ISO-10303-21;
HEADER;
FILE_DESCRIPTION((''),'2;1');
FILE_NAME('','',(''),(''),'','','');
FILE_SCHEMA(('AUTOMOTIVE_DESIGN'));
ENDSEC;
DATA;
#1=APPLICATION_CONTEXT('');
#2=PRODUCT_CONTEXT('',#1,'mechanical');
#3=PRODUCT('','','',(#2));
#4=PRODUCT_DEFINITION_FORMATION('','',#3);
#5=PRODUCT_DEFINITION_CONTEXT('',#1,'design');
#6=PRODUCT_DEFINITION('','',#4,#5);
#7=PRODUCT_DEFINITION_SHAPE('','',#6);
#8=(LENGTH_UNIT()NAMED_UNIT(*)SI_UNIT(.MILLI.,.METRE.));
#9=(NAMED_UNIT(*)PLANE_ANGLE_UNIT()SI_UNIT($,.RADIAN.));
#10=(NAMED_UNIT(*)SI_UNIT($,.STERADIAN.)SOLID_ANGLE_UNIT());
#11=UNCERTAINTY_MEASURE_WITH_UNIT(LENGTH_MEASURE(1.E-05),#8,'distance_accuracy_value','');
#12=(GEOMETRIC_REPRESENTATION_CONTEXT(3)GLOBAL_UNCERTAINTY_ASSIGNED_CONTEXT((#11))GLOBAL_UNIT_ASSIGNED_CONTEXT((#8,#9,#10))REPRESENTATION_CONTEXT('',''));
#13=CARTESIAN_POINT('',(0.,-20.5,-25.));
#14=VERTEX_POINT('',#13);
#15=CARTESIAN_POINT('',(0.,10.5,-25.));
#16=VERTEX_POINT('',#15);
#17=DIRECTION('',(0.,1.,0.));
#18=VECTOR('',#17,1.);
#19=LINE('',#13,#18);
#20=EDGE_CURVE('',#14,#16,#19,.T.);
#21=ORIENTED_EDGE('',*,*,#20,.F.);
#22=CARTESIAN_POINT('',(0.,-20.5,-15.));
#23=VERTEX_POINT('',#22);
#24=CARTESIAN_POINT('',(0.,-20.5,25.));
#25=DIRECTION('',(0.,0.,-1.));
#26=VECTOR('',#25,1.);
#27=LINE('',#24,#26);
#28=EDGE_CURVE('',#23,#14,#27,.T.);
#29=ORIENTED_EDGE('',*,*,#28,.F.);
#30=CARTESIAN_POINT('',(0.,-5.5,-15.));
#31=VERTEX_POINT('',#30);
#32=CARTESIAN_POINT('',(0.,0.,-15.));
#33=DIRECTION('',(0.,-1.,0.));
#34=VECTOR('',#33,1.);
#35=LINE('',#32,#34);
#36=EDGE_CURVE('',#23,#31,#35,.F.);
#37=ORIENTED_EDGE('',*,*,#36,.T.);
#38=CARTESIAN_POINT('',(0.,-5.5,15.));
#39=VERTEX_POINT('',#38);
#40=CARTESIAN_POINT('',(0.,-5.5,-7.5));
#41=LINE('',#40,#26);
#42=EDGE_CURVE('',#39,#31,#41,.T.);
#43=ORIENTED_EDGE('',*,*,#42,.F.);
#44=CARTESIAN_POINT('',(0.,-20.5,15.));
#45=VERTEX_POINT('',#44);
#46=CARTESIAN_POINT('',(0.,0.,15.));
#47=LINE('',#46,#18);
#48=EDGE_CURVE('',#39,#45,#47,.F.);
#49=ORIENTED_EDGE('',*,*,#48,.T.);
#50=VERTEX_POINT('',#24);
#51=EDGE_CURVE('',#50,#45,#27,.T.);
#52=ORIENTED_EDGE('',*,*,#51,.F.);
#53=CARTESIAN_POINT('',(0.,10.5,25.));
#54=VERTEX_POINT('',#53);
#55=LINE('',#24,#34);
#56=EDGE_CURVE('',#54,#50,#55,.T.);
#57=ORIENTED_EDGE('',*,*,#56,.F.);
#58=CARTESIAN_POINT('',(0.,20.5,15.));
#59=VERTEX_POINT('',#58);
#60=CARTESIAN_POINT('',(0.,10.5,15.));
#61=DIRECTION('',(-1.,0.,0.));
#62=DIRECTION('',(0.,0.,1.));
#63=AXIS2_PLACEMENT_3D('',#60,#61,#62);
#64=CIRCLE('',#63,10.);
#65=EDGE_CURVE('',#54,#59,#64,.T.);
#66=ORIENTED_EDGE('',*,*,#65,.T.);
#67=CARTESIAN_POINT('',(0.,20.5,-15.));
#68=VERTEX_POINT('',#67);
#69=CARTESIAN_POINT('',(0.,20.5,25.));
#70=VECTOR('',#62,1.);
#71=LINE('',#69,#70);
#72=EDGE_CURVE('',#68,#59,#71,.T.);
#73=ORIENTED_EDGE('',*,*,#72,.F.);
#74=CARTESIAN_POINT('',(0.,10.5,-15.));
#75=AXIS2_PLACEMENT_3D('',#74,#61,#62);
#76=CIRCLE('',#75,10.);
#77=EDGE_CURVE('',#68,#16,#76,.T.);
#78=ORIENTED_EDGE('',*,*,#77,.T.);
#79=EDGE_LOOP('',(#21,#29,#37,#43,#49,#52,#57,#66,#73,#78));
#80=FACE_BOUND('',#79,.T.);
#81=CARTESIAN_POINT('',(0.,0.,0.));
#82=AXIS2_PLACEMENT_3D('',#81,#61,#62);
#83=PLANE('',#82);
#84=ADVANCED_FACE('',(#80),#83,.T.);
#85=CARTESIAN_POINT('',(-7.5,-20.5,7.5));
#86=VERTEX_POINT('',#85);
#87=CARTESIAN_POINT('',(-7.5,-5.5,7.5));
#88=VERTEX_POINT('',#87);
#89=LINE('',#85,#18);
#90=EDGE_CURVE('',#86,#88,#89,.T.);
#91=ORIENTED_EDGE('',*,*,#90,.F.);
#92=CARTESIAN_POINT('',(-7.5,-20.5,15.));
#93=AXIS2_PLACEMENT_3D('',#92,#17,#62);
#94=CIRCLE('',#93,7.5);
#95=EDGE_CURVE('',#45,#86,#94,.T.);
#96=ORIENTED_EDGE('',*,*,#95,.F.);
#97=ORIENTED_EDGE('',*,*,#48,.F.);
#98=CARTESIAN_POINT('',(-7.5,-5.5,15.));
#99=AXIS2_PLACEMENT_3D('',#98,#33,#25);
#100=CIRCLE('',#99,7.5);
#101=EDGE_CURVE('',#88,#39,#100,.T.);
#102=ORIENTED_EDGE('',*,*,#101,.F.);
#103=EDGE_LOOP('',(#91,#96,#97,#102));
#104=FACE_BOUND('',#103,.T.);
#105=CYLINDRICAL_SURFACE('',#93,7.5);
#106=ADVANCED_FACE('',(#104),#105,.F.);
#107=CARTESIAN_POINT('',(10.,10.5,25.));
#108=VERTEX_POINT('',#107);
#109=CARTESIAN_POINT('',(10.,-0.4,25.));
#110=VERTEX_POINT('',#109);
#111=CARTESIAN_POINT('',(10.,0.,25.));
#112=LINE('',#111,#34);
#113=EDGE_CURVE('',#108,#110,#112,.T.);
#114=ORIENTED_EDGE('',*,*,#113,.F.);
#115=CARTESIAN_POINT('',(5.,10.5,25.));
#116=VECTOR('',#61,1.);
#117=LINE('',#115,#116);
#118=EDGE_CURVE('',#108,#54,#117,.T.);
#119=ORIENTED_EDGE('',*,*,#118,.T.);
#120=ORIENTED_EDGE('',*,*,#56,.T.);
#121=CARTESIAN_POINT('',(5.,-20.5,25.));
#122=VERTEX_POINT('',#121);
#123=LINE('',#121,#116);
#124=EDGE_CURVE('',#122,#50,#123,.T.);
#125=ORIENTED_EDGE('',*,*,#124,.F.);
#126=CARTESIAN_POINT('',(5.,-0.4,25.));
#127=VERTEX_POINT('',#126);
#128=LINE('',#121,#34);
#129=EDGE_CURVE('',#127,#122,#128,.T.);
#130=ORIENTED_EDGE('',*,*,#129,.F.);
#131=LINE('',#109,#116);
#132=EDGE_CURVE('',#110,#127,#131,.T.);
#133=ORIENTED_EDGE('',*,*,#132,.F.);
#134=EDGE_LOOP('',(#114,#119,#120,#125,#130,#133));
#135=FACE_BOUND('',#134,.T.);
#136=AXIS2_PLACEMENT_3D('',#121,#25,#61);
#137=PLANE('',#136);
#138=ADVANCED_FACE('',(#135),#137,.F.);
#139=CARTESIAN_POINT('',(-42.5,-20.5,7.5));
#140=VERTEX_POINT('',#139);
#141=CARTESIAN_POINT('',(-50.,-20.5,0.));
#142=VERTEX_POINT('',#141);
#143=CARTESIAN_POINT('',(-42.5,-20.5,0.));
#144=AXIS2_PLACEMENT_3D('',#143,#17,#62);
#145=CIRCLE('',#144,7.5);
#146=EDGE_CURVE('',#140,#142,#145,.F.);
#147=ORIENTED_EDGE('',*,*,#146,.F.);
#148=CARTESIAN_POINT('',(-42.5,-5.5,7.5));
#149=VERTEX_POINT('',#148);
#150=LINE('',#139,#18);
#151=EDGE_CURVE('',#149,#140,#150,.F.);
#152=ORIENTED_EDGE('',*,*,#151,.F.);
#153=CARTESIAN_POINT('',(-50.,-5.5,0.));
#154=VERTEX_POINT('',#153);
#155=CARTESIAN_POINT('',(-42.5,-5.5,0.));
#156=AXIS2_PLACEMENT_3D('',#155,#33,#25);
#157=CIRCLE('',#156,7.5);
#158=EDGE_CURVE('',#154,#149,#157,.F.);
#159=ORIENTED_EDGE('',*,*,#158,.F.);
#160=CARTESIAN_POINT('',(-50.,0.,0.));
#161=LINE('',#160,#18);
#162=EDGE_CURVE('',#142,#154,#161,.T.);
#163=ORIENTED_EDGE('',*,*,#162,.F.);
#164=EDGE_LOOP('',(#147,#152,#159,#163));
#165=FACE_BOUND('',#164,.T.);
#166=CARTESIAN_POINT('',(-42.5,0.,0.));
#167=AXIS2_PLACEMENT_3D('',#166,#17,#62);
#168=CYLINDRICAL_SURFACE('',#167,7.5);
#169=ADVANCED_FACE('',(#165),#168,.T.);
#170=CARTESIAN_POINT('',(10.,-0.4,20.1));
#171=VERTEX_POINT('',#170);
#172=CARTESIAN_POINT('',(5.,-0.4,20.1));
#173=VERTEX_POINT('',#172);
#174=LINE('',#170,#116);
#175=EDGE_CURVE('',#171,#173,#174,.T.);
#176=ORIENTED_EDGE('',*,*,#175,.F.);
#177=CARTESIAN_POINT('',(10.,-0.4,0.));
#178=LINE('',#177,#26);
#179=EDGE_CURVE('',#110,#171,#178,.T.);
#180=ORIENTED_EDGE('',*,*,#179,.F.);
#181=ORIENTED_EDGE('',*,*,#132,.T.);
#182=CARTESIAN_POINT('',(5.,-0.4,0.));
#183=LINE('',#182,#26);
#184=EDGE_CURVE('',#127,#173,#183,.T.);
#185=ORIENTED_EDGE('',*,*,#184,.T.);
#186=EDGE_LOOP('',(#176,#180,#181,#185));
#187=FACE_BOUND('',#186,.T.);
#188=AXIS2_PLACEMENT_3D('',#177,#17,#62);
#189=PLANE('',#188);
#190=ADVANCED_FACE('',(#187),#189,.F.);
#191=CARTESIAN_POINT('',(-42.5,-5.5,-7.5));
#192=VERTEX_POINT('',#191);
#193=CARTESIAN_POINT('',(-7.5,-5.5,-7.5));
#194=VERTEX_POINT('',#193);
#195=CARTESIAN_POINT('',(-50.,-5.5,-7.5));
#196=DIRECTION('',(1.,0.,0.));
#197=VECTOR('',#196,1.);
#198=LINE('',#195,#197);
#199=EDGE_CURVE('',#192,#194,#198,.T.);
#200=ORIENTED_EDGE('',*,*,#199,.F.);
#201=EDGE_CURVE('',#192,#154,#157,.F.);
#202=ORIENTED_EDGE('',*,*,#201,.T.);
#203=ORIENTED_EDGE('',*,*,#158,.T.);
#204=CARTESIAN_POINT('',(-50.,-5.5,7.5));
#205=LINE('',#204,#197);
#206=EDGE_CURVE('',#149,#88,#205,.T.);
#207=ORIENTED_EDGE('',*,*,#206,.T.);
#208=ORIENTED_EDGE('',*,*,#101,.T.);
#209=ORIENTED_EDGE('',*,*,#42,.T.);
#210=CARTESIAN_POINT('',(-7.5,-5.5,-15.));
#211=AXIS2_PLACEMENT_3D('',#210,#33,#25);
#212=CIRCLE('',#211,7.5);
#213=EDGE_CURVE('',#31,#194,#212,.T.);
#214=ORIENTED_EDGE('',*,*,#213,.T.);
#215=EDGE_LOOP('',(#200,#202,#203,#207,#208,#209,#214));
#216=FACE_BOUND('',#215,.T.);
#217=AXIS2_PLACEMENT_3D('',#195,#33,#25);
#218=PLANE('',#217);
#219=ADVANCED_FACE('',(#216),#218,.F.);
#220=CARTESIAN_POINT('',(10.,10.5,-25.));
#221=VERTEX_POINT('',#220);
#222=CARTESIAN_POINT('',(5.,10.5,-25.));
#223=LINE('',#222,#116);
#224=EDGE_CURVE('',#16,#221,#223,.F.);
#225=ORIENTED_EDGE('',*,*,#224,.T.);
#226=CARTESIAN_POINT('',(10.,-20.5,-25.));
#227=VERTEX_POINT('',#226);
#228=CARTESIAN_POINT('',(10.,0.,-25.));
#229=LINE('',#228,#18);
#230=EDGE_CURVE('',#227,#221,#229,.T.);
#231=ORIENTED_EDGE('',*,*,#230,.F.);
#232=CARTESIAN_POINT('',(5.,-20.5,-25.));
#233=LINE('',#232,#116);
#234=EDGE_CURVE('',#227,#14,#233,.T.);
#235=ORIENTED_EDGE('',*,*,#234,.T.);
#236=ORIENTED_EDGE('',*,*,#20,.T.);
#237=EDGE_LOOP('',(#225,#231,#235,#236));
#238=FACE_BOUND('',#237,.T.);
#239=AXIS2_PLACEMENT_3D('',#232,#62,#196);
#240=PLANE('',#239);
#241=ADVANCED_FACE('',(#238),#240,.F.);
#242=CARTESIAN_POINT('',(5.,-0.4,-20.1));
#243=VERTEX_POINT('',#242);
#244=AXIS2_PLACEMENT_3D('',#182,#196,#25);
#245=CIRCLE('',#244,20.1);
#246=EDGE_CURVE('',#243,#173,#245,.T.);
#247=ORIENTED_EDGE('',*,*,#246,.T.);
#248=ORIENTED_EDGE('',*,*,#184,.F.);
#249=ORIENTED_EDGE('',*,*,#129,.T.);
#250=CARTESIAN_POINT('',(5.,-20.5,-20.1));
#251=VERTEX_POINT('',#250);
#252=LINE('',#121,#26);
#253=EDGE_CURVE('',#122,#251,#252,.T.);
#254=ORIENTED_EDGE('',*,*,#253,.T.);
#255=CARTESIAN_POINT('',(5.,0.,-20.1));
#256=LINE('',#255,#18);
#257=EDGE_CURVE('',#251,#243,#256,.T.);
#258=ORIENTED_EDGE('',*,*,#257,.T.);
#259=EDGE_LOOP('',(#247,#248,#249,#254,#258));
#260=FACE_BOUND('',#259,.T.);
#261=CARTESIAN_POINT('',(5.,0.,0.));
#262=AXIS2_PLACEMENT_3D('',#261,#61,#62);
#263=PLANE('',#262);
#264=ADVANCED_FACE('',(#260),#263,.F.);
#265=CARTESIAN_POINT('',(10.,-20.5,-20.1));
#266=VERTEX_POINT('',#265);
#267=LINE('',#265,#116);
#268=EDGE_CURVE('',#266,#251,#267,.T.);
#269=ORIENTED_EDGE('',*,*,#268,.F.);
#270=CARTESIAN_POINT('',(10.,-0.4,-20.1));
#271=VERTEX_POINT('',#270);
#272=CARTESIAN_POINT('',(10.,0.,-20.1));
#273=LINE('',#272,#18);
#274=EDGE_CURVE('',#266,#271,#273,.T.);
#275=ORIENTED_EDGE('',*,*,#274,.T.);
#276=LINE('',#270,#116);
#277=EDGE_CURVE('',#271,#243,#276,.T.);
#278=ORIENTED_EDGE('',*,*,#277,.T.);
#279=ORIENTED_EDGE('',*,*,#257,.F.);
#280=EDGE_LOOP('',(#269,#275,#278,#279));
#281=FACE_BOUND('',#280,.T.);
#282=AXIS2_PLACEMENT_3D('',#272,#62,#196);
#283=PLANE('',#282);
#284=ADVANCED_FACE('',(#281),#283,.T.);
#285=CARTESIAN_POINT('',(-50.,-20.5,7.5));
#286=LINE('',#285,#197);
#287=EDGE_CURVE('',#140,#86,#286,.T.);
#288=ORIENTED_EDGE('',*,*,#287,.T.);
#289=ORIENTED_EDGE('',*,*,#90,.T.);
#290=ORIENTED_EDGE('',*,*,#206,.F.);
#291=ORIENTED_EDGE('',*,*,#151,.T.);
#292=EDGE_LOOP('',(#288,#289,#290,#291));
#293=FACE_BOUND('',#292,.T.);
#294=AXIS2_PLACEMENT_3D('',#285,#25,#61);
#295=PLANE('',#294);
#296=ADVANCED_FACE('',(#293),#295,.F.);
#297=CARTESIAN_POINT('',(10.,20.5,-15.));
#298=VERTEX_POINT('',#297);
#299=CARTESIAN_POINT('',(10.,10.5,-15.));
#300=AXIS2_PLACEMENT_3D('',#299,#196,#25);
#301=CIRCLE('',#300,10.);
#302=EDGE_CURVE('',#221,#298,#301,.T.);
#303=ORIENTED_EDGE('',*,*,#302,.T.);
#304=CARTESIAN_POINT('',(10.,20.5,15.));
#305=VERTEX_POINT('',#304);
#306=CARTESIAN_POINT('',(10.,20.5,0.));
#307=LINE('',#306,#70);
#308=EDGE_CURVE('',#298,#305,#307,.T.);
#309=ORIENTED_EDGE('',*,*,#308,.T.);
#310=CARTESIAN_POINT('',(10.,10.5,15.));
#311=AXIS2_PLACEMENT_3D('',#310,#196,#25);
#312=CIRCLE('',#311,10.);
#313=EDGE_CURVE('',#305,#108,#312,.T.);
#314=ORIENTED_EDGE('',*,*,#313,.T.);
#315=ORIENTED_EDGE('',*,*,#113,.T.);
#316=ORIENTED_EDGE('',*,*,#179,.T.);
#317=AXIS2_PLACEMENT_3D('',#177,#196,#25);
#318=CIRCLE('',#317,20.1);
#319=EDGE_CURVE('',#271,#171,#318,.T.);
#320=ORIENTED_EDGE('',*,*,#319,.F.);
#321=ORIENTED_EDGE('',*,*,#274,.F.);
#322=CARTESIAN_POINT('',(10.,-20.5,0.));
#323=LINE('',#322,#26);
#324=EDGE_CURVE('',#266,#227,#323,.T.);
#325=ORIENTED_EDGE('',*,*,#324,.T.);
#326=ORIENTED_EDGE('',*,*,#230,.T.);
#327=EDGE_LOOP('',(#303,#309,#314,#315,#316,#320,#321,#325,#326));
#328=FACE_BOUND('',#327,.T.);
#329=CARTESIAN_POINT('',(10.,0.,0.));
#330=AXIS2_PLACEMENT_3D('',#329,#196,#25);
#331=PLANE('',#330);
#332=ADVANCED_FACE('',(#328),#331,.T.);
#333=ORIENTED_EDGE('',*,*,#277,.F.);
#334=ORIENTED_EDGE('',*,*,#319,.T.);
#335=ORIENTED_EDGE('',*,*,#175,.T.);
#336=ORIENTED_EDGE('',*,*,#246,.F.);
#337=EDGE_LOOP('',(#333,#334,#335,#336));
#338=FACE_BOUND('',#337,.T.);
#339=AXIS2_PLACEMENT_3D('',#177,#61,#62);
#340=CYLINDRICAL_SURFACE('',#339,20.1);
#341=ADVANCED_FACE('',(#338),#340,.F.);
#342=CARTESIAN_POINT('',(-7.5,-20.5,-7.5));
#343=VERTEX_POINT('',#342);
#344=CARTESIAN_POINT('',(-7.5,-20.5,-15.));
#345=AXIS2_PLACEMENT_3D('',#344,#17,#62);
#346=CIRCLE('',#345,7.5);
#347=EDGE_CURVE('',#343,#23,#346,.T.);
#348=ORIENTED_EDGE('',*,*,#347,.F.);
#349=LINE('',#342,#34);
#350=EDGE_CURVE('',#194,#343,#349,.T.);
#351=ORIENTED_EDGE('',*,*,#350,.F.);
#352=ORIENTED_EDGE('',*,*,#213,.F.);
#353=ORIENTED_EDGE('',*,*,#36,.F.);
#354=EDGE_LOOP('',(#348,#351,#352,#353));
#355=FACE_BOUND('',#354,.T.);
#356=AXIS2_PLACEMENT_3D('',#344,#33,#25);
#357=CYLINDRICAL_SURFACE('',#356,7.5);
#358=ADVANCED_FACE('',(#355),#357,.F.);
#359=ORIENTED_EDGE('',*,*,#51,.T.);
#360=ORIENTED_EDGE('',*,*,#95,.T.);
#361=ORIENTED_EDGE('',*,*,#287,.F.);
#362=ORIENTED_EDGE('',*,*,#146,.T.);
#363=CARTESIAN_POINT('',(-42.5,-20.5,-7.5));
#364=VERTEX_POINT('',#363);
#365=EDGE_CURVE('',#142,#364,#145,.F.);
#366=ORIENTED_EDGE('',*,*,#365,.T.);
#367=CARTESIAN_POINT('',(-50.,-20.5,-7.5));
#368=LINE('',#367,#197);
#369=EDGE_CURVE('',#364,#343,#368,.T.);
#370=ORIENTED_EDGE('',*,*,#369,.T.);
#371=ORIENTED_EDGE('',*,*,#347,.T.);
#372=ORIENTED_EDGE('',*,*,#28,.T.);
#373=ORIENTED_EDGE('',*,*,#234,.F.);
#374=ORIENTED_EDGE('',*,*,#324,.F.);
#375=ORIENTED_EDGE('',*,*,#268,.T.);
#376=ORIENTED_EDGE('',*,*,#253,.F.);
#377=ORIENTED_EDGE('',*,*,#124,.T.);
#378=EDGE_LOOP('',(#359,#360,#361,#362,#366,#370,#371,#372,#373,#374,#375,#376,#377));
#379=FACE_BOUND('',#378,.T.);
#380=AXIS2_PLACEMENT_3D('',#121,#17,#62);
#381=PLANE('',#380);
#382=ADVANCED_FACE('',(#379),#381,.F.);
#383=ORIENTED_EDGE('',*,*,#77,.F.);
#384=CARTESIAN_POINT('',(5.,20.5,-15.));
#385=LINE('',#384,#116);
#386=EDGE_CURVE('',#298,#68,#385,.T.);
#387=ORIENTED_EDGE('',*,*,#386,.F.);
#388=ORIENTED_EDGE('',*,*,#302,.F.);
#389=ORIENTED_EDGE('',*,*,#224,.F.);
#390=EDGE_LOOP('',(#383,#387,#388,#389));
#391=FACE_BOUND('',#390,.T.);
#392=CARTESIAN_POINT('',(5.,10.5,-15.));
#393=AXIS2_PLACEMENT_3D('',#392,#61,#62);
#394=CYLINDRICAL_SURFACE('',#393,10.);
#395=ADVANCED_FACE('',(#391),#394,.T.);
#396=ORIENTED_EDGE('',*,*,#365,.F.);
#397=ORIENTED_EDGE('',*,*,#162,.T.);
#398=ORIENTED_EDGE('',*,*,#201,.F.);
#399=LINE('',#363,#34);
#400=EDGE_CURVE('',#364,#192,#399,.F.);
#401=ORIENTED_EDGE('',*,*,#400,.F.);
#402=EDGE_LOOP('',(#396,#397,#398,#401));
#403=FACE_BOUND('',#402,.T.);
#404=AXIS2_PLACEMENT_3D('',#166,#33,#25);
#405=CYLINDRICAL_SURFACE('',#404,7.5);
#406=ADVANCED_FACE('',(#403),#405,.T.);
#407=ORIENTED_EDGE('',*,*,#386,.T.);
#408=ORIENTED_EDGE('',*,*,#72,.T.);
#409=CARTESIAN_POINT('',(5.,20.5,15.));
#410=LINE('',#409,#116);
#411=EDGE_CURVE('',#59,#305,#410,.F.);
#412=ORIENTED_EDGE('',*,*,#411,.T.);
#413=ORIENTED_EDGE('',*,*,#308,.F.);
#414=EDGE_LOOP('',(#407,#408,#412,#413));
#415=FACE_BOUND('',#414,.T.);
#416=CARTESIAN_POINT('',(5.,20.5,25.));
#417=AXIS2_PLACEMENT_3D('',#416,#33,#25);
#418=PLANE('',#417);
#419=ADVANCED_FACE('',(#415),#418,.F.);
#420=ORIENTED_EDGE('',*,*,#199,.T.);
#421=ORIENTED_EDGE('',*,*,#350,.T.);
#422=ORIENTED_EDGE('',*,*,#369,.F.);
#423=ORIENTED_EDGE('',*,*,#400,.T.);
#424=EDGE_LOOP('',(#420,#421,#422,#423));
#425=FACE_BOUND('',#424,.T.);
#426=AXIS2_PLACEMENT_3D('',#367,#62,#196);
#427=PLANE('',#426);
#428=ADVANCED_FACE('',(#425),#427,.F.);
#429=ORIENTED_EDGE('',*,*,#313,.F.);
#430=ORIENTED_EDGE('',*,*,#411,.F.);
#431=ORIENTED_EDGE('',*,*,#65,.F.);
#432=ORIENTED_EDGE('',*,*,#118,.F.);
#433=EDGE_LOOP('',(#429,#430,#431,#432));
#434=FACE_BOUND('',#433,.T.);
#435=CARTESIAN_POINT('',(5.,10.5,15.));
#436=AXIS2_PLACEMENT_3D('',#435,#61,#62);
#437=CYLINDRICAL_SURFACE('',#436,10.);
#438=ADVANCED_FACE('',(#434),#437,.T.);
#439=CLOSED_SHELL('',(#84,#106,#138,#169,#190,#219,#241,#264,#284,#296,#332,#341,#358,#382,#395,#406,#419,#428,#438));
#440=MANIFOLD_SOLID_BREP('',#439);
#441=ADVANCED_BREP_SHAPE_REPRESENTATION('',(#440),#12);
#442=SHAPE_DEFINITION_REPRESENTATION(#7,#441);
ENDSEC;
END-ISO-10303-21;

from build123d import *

# Parameters (mm, degrees)
SKETCH1_W           = 50
SKETCH1_H           = 41
BOSS_EXTRUDE1_DEPTH = 5
SKETCH2_W           = 15
SKETCH2_H           = 15
BOSS_EXTRUDE2_DEPTH = 50
BOSS_EXTRUDE3_DEPTH = 5
FILLET1_START       = -20.5
FILLET1_DEPTH       = 41
FILLET1_2_DEPTH     = 15
FILLET2_R           = 10


with BuildPart() as part:
    # Sketch1 → Boss-Extrude1 (new body)
    with BuildSketch(Plane(origin=(0, 0, 0), x_dir=(0, 0, -1), z_dir=(1, 0, 0))):
        Rectangle(SKETCH1_W, SKETCH1_H)
    extrude(amount=BOSS_EXTRUDE1_DEPTH)

    # Sketch2 → Boss-Extrude2 (add)
    with BuildSketch(Plane.ZY):
        with Locations((0, -13)):
            Rectangle(SKETCH2_W, SKETCH2_H)
    extrude(amount=BOSS_EXTRUDE2_DEPTH)

    # Sketch3 → Boss-Extrude3 (add)
    with BuildSketch(Plane(origin=(5, 0, 0), x_dir=(0, 0, -1), z_dir=(1, 0, 0))):
        with BuildLine():
            Line((25, 20.5), (-25, 20.5))
            Line((-25, 20.5), (-25, -0.4))
            Line((-25, -0.4), (-20.1, -0.4))
            ThreePointArc((-20.1, -0.4), (0, 19.7), (20.1, -0.4))
            Line((20.1, -0.4), (20.1, -20.5))
            Line((20.1, -20.5), (25, -20.5))
            Line((25, -20.5), (25, 20.5))
        make_face()
    extrude(amount=BOSS_EXTRUDE3_DEPTH)

    # Fillet1: read off the stored shape, not the designer's step
    # Fillet1 outline → Fillet1 (cut)
    with BuildSketch(Plane(origin=(0, 0, 0), x_dir=(1, 0, 0), z_dir=(0, 1, 0)).offset(FILLET1_START)):
        with BuildLine():
            Line((-50, 7.5), (-50, 0))
            ThreePointArc((-50, 0), (-47.803300859, 5.303300859), (-42.5, 7.5))
            Line((-42.5, 7.5), (-50, 7.5))
        make_face()
        with BuildLine():
            ThreePointArc((-42.5, -7.5), (-47.803300859, -5.303300859), (-50, 0))
            Line((-50, 0), (-50, -7.5))
            Line((-50, -7.5), (-42.5, -7.5))
        make_face()
    extrude(amount=FILLET1_DEPTH, mode=Mode.SUBTRACT)

    # Fillet1 2 outline → Fillet1 2 (add)
    with BuildSketch(Plane(origin=(0, 0, 0), x_dir=(1, 0, 0), z_dir=(0, 1, 0)).offset(FILLET1_START)):
        with BuildLine():
            Line((0, -7.5), (-7.5, -7.5))
            ThreePointArc((-7.5, -7.5), (-2.196699141, -9.696699141), (0, -15))
            Line((0, -15), (0, -7.5))
        make_face()
        with BuildLine():
            ThreePointArc((0, 15), (-2.196699141, 9.696699141), (-7.5, 7.5))
            Line((-7.5, 7.5), (0, 7.5))
            Line((0, 7.5), (0, 15))
        make_face()
    extrude(amount=FILLET1_2_DEPTH)

    # Fillet2
    fillet2_edges = [part.edges().sort_by_distance(p)[0] for p in [
        (5, 20.5, 25),
        (5, 20.5, -25),
    ]]
    fillet(fillet2_edges, radius=FILLET2_R)


solid = part.part
